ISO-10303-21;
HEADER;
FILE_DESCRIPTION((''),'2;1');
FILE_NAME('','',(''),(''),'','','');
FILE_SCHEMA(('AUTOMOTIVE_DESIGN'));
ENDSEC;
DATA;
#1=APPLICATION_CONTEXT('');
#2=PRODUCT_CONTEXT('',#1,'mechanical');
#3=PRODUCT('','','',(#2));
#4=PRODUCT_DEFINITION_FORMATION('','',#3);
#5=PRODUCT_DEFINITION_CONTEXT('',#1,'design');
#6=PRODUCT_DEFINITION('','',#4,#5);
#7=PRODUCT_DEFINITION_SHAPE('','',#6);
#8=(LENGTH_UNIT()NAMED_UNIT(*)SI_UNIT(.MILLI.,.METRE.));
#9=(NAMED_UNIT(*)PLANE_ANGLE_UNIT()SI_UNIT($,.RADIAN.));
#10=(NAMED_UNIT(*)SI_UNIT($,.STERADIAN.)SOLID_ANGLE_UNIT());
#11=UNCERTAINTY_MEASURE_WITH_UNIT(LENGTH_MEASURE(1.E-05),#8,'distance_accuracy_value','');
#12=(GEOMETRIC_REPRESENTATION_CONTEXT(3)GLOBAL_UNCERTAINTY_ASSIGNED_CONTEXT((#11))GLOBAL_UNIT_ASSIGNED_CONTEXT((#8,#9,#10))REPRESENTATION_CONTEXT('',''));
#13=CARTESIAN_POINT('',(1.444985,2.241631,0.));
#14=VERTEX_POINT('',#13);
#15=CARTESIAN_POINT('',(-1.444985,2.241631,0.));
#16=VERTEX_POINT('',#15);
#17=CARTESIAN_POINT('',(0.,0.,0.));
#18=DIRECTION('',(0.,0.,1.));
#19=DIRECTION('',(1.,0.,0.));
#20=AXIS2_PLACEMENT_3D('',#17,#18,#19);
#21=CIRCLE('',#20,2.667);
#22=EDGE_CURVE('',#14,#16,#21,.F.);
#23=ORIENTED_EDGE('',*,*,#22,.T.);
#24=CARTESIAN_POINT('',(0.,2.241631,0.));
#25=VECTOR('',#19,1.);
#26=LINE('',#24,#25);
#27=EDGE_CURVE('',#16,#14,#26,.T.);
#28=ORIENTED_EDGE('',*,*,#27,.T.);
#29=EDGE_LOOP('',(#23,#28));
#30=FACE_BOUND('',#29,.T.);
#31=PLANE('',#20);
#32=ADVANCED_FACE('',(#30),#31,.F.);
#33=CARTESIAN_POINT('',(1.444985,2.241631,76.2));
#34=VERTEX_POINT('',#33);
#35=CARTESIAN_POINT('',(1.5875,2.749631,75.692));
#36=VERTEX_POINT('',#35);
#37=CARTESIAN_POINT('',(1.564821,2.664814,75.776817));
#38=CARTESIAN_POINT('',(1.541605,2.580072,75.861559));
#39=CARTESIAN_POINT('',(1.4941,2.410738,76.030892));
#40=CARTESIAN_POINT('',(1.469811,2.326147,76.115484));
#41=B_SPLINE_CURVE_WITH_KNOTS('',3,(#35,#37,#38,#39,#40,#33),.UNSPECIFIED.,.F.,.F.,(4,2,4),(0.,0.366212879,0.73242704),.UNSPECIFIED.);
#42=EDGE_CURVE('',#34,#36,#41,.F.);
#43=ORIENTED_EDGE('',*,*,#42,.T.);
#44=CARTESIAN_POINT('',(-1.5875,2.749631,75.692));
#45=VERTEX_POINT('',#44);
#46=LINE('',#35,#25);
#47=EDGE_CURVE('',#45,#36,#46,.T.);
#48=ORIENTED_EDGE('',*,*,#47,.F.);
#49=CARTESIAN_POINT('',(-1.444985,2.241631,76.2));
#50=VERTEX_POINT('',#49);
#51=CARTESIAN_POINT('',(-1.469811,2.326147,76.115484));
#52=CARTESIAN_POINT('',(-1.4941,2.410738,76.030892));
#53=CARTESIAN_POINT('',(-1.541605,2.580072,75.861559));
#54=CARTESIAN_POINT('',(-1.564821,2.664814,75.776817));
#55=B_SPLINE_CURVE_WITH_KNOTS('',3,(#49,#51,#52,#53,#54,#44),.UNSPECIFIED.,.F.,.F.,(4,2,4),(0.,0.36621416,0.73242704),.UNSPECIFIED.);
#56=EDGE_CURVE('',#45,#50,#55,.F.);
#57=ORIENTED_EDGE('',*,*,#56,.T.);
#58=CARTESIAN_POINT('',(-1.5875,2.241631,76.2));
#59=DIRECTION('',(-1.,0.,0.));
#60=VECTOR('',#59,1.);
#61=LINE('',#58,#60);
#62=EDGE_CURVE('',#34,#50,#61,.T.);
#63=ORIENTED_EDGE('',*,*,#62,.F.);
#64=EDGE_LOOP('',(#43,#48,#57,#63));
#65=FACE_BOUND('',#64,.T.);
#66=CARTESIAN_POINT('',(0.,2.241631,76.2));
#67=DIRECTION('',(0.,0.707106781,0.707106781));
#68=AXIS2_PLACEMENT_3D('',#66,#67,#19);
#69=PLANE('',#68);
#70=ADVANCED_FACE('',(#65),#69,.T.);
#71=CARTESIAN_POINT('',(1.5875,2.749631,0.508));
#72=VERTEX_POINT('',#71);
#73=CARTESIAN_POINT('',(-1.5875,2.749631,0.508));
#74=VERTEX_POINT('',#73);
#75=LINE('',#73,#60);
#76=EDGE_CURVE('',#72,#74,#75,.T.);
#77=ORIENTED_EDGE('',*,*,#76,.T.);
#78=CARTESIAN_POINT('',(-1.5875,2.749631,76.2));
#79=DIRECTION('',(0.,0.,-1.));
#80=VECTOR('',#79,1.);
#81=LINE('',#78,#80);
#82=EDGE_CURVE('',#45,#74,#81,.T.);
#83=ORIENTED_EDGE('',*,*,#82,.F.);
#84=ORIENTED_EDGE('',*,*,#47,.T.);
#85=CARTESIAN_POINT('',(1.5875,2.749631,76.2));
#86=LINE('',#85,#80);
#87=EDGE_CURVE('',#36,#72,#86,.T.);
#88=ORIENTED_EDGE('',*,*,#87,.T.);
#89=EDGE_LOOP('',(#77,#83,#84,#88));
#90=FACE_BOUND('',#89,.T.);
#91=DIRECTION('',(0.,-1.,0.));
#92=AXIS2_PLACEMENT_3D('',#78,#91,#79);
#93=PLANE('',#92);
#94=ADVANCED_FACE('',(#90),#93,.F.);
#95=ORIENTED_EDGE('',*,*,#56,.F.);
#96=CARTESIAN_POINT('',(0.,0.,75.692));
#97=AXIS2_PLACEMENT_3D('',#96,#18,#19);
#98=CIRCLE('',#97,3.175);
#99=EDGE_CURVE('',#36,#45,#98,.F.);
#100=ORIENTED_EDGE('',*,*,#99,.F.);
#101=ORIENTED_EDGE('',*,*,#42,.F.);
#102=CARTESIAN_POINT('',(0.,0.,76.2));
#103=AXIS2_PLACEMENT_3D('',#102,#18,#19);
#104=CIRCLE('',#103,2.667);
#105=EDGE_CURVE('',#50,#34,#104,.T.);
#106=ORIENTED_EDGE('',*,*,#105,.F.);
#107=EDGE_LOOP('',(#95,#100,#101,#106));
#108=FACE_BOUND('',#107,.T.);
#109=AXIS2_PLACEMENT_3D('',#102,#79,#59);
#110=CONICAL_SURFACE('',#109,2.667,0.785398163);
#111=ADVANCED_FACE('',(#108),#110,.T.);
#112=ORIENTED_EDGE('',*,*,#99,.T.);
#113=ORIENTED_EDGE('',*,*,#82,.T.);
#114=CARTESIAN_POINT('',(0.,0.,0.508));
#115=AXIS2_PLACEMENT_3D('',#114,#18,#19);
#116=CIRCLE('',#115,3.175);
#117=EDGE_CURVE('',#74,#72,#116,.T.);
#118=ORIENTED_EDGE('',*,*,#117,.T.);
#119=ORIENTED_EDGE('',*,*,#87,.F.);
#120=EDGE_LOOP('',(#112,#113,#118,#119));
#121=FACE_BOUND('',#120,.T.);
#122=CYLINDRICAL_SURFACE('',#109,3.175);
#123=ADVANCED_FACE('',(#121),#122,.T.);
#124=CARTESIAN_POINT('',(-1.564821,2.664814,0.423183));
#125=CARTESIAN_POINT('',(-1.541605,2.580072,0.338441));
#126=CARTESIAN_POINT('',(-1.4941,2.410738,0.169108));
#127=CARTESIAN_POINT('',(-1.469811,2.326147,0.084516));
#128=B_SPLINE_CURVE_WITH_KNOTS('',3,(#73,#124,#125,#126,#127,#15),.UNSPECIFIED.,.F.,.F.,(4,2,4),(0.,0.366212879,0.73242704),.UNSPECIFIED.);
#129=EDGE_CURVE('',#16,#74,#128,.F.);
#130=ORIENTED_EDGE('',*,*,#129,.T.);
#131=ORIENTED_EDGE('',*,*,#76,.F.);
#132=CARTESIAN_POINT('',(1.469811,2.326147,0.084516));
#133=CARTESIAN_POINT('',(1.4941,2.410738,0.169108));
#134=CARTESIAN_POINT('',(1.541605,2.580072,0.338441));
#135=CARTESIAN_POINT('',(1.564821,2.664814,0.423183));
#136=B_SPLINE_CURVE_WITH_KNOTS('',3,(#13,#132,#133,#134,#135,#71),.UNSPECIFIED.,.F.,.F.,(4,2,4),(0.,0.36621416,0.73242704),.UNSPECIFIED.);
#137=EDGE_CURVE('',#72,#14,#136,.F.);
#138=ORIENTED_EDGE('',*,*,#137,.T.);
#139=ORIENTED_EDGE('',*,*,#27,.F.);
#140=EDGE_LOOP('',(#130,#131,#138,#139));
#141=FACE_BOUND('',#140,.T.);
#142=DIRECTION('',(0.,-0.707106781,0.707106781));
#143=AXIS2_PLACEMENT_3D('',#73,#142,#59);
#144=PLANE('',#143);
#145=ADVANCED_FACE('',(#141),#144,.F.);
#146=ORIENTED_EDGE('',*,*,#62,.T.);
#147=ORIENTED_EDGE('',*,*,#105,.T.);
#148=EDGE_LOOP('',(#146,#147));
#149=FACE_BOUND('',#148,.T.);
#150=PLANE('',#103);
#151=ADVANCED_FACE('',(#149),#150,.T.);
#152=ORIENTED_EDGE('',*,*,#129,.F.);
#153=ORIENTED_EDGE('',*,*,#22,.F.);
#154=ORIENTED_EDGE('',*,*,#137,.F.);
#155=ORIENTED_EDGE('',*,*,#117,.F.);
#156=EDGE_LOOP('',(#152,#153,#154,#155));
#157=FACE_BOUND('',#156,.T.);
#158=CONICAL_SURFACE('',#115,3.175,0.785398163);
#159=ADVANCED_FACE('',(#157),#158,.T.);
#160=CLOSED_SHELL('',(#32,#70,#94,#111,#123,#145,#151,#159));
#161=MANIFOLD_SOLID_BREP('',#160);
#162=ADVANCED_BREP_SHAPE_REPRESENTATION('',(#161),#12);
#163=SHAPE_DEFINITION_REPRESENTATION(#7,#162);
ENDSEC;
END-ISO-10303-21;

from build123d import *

# Parameters (mm, degrees)
BOSS_EXTRUDE1_DEPTH = 76.2
CHAMFER1_SIZE       = 0.508


with BuildPart() as part:
    # Sketch1 → Boss-Extrude1 (new body)
    with BuildSketch(Plane.XY):
        with BuildLine():
            Line((-1.5875, 2.749630657), (1.5875, 2.749630657))
            ThreePointArc((1.5875, 2.749630657), (0, -3.175), (-1.5875, 2.749630657))
        make_face()
    extrude(amount=BOSS_EXTRUDE1_DEPTH)

    # Chamfer1
    # the kernel refuses this chamfer: 0.508 mm, written as the material it takes off along each edge
    with BuildSketch(Plane(origin=(-2.893914958, 2.749630657, 0), x_dir=(0, 0.027495876610586435, 0.9996219169112968), z_dir=(1, 0, 0))) as chamfer1_piece_1:
        Polygon((CHAMFER1_SIZE * 0.999621916911, CHAMFER1_SIZE * 0.0274958766106), (-CHAMFER1_SIZE * 0.0274958766106, CHAMFER1_SIZE * 0.999621916911), (0, 0), align=None)
    extrude(amount=5.787829916, mode=Mode.SUBTRACT)
    with BuildSketch(Plane(origin=(0, 0, 0), x_dir=(0.11006425826792274, 0.9939244735149306, 0), z_dir=(-0.9939244735149306, 0.11006425826792274, 0))) as chamfer1_piece_2:
        Polygon((3.175, -CHAMFER1_SIZE), (3.175 - CHAMFER1_SIZE, 0), (3.175, 0), align=None)
    revolve(axis=Axis((0, 0, 0), (0, 0, -1)), revolution_arc=347.361960422, mode=Mode.SUBTRACT)
    with BuildSketch(Plane(origin=(0, 0, 76.2), x_dir=(0.11006425826792288, 0.9939244735149306, 0), z_dir=(-0.9939244735149306, 0.11006425826792288, 0))) as chamfer1_piece_3:
        Polygon((3.175, CHAMFER1_SIZE), (3.175 - CHAMFER1_SIZE, 0), (3.175, 0), align=None)
    revolve(axis=Axis((0, 0, 76.2), (0, 0, -1)), revolution_arc=347.361960422, mode=Mode.SUBTRACT)
    with BuildSketch(Plane(origin=(-2.893914958, 2.749630657, 76.2), x_dir=(0, 0.027495876610587017, -0.9996219169112968), z_dir=(1, 0, 0))) as chamfer1_piece_4:
        Polygon((CHAMFER1_SIZE * 0.999621916911, -CHAMFER1_SIZE * 0.0274958766106), (-CHAMFER1_SIZE * 0.0274958766106, -CHAMFER1_SIZE * 0.999621916911), (0, 0), align=None)
    extrude(amount=5.787829916, mode=Mode.SUBTRACT)


solid = part.part
